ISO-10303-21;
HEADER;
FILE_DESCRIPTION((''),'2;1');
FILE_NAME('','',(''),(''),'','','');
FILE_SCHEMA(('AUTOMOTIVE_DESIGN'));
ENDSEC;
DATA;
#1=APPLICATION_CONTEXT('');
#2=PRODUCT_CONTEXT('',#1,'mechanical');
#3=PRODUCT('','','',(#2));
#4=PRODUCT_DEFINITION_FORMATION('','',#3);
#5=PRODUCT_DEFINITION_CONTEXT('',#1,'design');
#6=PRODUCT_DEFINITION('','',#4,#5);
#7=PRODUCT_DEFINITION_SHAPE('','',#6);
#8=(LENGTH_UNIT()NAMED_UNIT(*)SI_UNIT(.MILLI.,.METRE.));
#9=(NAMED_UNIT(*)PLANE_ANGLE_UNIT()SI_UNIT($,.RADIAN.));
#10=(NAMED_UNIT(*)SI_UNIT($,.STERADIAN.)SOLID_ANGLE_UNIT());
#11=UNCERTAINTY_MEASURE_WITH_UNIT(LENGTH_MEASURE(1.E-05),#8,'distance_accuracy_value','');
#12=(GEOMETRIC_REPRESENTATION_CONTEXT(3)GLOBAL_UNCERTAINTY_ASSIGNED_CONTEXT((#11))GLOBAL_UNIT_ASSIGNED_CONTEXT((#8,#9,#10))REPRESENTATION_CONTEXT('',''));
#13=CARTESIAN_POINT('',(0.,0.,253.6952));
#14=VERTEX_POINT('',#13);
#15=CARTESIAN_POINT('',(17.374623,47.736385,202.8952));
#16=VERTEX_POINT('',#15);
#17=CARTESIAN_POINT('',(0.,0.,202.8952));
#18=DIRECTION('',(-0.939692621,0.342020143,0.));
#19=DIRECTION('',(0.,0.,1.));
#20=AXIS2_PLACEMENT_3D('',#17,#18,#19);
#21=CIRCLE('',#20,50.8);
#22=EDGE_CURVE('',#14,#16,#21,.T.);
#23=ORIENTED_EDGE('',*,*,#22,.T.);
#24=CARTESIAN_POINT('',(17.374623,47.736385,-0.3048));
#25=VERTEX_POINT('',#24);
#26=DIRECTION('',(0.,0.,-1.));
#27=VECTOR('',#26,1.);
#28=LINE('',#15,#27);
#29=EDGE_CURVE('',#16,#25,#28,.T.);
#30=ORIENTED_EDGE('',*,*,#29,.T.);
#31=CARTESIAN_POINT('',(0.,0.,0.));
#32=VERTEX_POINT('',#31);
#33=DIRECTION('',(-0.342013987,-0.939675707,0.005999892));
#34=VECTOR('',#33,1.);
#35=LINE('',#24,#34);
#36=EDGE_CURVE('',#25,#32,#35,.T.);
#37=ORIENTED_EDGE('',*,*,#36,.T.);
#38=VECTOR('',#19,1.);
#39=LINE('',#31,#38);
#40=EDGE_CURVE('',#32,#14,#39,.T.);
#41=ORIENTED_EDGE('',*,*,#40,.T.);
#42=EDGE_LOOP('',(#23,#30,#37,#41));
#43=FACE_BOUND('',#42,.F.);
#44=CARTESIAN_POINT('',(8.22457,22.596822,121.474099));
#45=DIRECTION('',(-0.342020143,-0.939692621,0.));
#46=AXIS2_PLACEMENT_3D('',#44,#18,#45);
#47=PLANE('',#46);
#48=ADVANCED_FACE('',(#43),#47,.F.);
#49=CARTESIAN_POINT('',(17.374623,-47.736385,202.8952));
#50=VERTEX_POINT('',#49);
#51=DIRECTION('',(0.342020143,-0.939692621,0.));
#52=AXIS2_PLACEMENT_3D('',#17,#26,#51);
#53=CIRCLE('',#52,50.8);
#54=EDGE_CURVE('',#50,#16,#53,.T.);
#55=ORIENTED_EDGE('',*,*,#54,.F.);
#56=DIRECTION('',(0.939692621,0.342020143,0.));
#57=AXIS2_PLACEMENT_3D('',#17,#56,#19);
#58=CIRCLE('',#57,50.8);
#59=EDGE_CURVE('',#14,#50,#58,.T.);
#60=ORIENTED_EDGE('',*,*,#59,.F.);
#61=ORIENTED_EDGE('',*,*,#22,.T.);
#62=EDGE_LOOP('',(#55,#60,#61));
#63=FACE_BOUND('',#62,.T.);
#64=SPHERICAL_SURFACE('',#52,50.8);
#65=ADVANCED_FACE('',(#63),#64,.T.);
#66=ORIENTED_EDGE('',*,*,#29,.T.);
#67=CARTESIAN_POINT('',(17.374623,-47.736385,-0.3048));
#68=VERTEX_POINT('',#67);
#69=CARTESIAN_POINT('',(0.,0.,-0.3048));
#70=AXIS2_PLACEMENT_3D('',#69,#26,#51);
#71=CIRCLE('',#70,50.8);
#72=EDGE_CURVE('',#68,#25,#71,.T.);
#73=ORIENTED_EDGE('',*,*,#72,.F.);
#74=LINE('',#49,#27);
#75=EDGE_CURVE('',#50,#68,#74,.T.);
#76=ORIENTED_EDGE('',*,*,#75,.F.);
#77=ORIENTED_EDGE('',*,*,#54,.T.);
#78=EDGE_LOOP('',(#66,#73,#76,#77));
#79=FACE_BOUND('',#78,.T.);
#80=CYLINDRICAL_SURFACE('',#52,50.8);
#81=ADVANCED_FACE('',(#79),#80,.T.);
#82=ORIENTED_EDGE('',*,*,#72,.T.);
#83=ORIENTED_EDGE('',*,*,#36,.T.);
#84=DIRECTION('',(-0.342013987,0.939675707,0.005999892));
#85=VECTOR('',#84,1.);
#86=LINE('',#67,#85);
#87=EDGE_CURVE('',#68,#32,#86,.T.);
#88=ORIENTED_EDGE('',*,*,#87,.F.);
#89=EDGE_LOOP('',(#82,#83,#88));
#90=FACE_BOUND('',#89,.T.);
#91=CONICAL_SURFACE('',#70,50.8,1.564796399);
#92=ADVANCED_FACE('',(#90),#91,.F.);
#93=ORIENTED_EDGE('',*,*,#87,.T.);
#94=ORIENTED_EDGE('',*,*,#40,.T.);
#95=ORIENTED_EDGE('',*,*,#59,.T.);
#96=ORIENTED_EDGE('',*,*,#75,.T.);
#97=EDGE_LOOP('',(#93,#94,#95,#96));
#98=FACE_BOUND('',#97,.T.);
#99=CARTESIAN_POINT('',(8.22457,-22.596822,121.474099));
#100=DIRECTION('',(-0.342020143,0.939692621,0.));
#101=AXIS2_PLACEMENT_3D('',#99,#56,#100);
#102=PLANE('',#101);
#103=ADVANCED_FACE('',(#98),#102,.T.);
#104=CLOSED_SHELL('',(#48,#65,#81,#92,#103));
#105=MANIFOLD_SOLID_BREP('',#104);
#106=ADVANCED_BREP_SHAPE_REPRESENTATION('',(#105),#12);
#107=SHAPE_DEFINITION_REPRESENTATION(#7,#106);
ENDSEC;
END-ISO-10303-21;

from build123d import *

# Parameters (mm, degrees)
F1_ANGLE_BACK = 110
F1_ANGLE      = 220


# Not quite as in the source:
# - a feature of the source that left no trace in its solid (it failed there, or was rolled back) is left out


with BuildPart() as f1:
    # F0 (on Front) → F1 (revolve)
    with BuildSketch(Plane.XZ, mode=Mode.PRIVATE) as f1_sk:
        with BuildLine():
            ThreePointArc((0, 253.6952), (-35.9210244843, 238.8162244843), (-50.8, 202.8952))
            Line((-50.8, 202.8952), (-50.8, -0.3048))
            Line((-50.8, -0.3048), (0, 0))
            Line((0, 0), (0, 202.8952))
            Line((0, 202.8952), (0, 253.6952))
        make_face()
    revolve(f1_sk.sketch.rotate(Axis((0, 0, 126.8476), (0, 0, -1)), -F1_ANGLE_BACK), axis=Axis((0, 0, 126.8476), (0, 0, -1)), revolution_arc=F1_ANGLE)


solid = f1.part
